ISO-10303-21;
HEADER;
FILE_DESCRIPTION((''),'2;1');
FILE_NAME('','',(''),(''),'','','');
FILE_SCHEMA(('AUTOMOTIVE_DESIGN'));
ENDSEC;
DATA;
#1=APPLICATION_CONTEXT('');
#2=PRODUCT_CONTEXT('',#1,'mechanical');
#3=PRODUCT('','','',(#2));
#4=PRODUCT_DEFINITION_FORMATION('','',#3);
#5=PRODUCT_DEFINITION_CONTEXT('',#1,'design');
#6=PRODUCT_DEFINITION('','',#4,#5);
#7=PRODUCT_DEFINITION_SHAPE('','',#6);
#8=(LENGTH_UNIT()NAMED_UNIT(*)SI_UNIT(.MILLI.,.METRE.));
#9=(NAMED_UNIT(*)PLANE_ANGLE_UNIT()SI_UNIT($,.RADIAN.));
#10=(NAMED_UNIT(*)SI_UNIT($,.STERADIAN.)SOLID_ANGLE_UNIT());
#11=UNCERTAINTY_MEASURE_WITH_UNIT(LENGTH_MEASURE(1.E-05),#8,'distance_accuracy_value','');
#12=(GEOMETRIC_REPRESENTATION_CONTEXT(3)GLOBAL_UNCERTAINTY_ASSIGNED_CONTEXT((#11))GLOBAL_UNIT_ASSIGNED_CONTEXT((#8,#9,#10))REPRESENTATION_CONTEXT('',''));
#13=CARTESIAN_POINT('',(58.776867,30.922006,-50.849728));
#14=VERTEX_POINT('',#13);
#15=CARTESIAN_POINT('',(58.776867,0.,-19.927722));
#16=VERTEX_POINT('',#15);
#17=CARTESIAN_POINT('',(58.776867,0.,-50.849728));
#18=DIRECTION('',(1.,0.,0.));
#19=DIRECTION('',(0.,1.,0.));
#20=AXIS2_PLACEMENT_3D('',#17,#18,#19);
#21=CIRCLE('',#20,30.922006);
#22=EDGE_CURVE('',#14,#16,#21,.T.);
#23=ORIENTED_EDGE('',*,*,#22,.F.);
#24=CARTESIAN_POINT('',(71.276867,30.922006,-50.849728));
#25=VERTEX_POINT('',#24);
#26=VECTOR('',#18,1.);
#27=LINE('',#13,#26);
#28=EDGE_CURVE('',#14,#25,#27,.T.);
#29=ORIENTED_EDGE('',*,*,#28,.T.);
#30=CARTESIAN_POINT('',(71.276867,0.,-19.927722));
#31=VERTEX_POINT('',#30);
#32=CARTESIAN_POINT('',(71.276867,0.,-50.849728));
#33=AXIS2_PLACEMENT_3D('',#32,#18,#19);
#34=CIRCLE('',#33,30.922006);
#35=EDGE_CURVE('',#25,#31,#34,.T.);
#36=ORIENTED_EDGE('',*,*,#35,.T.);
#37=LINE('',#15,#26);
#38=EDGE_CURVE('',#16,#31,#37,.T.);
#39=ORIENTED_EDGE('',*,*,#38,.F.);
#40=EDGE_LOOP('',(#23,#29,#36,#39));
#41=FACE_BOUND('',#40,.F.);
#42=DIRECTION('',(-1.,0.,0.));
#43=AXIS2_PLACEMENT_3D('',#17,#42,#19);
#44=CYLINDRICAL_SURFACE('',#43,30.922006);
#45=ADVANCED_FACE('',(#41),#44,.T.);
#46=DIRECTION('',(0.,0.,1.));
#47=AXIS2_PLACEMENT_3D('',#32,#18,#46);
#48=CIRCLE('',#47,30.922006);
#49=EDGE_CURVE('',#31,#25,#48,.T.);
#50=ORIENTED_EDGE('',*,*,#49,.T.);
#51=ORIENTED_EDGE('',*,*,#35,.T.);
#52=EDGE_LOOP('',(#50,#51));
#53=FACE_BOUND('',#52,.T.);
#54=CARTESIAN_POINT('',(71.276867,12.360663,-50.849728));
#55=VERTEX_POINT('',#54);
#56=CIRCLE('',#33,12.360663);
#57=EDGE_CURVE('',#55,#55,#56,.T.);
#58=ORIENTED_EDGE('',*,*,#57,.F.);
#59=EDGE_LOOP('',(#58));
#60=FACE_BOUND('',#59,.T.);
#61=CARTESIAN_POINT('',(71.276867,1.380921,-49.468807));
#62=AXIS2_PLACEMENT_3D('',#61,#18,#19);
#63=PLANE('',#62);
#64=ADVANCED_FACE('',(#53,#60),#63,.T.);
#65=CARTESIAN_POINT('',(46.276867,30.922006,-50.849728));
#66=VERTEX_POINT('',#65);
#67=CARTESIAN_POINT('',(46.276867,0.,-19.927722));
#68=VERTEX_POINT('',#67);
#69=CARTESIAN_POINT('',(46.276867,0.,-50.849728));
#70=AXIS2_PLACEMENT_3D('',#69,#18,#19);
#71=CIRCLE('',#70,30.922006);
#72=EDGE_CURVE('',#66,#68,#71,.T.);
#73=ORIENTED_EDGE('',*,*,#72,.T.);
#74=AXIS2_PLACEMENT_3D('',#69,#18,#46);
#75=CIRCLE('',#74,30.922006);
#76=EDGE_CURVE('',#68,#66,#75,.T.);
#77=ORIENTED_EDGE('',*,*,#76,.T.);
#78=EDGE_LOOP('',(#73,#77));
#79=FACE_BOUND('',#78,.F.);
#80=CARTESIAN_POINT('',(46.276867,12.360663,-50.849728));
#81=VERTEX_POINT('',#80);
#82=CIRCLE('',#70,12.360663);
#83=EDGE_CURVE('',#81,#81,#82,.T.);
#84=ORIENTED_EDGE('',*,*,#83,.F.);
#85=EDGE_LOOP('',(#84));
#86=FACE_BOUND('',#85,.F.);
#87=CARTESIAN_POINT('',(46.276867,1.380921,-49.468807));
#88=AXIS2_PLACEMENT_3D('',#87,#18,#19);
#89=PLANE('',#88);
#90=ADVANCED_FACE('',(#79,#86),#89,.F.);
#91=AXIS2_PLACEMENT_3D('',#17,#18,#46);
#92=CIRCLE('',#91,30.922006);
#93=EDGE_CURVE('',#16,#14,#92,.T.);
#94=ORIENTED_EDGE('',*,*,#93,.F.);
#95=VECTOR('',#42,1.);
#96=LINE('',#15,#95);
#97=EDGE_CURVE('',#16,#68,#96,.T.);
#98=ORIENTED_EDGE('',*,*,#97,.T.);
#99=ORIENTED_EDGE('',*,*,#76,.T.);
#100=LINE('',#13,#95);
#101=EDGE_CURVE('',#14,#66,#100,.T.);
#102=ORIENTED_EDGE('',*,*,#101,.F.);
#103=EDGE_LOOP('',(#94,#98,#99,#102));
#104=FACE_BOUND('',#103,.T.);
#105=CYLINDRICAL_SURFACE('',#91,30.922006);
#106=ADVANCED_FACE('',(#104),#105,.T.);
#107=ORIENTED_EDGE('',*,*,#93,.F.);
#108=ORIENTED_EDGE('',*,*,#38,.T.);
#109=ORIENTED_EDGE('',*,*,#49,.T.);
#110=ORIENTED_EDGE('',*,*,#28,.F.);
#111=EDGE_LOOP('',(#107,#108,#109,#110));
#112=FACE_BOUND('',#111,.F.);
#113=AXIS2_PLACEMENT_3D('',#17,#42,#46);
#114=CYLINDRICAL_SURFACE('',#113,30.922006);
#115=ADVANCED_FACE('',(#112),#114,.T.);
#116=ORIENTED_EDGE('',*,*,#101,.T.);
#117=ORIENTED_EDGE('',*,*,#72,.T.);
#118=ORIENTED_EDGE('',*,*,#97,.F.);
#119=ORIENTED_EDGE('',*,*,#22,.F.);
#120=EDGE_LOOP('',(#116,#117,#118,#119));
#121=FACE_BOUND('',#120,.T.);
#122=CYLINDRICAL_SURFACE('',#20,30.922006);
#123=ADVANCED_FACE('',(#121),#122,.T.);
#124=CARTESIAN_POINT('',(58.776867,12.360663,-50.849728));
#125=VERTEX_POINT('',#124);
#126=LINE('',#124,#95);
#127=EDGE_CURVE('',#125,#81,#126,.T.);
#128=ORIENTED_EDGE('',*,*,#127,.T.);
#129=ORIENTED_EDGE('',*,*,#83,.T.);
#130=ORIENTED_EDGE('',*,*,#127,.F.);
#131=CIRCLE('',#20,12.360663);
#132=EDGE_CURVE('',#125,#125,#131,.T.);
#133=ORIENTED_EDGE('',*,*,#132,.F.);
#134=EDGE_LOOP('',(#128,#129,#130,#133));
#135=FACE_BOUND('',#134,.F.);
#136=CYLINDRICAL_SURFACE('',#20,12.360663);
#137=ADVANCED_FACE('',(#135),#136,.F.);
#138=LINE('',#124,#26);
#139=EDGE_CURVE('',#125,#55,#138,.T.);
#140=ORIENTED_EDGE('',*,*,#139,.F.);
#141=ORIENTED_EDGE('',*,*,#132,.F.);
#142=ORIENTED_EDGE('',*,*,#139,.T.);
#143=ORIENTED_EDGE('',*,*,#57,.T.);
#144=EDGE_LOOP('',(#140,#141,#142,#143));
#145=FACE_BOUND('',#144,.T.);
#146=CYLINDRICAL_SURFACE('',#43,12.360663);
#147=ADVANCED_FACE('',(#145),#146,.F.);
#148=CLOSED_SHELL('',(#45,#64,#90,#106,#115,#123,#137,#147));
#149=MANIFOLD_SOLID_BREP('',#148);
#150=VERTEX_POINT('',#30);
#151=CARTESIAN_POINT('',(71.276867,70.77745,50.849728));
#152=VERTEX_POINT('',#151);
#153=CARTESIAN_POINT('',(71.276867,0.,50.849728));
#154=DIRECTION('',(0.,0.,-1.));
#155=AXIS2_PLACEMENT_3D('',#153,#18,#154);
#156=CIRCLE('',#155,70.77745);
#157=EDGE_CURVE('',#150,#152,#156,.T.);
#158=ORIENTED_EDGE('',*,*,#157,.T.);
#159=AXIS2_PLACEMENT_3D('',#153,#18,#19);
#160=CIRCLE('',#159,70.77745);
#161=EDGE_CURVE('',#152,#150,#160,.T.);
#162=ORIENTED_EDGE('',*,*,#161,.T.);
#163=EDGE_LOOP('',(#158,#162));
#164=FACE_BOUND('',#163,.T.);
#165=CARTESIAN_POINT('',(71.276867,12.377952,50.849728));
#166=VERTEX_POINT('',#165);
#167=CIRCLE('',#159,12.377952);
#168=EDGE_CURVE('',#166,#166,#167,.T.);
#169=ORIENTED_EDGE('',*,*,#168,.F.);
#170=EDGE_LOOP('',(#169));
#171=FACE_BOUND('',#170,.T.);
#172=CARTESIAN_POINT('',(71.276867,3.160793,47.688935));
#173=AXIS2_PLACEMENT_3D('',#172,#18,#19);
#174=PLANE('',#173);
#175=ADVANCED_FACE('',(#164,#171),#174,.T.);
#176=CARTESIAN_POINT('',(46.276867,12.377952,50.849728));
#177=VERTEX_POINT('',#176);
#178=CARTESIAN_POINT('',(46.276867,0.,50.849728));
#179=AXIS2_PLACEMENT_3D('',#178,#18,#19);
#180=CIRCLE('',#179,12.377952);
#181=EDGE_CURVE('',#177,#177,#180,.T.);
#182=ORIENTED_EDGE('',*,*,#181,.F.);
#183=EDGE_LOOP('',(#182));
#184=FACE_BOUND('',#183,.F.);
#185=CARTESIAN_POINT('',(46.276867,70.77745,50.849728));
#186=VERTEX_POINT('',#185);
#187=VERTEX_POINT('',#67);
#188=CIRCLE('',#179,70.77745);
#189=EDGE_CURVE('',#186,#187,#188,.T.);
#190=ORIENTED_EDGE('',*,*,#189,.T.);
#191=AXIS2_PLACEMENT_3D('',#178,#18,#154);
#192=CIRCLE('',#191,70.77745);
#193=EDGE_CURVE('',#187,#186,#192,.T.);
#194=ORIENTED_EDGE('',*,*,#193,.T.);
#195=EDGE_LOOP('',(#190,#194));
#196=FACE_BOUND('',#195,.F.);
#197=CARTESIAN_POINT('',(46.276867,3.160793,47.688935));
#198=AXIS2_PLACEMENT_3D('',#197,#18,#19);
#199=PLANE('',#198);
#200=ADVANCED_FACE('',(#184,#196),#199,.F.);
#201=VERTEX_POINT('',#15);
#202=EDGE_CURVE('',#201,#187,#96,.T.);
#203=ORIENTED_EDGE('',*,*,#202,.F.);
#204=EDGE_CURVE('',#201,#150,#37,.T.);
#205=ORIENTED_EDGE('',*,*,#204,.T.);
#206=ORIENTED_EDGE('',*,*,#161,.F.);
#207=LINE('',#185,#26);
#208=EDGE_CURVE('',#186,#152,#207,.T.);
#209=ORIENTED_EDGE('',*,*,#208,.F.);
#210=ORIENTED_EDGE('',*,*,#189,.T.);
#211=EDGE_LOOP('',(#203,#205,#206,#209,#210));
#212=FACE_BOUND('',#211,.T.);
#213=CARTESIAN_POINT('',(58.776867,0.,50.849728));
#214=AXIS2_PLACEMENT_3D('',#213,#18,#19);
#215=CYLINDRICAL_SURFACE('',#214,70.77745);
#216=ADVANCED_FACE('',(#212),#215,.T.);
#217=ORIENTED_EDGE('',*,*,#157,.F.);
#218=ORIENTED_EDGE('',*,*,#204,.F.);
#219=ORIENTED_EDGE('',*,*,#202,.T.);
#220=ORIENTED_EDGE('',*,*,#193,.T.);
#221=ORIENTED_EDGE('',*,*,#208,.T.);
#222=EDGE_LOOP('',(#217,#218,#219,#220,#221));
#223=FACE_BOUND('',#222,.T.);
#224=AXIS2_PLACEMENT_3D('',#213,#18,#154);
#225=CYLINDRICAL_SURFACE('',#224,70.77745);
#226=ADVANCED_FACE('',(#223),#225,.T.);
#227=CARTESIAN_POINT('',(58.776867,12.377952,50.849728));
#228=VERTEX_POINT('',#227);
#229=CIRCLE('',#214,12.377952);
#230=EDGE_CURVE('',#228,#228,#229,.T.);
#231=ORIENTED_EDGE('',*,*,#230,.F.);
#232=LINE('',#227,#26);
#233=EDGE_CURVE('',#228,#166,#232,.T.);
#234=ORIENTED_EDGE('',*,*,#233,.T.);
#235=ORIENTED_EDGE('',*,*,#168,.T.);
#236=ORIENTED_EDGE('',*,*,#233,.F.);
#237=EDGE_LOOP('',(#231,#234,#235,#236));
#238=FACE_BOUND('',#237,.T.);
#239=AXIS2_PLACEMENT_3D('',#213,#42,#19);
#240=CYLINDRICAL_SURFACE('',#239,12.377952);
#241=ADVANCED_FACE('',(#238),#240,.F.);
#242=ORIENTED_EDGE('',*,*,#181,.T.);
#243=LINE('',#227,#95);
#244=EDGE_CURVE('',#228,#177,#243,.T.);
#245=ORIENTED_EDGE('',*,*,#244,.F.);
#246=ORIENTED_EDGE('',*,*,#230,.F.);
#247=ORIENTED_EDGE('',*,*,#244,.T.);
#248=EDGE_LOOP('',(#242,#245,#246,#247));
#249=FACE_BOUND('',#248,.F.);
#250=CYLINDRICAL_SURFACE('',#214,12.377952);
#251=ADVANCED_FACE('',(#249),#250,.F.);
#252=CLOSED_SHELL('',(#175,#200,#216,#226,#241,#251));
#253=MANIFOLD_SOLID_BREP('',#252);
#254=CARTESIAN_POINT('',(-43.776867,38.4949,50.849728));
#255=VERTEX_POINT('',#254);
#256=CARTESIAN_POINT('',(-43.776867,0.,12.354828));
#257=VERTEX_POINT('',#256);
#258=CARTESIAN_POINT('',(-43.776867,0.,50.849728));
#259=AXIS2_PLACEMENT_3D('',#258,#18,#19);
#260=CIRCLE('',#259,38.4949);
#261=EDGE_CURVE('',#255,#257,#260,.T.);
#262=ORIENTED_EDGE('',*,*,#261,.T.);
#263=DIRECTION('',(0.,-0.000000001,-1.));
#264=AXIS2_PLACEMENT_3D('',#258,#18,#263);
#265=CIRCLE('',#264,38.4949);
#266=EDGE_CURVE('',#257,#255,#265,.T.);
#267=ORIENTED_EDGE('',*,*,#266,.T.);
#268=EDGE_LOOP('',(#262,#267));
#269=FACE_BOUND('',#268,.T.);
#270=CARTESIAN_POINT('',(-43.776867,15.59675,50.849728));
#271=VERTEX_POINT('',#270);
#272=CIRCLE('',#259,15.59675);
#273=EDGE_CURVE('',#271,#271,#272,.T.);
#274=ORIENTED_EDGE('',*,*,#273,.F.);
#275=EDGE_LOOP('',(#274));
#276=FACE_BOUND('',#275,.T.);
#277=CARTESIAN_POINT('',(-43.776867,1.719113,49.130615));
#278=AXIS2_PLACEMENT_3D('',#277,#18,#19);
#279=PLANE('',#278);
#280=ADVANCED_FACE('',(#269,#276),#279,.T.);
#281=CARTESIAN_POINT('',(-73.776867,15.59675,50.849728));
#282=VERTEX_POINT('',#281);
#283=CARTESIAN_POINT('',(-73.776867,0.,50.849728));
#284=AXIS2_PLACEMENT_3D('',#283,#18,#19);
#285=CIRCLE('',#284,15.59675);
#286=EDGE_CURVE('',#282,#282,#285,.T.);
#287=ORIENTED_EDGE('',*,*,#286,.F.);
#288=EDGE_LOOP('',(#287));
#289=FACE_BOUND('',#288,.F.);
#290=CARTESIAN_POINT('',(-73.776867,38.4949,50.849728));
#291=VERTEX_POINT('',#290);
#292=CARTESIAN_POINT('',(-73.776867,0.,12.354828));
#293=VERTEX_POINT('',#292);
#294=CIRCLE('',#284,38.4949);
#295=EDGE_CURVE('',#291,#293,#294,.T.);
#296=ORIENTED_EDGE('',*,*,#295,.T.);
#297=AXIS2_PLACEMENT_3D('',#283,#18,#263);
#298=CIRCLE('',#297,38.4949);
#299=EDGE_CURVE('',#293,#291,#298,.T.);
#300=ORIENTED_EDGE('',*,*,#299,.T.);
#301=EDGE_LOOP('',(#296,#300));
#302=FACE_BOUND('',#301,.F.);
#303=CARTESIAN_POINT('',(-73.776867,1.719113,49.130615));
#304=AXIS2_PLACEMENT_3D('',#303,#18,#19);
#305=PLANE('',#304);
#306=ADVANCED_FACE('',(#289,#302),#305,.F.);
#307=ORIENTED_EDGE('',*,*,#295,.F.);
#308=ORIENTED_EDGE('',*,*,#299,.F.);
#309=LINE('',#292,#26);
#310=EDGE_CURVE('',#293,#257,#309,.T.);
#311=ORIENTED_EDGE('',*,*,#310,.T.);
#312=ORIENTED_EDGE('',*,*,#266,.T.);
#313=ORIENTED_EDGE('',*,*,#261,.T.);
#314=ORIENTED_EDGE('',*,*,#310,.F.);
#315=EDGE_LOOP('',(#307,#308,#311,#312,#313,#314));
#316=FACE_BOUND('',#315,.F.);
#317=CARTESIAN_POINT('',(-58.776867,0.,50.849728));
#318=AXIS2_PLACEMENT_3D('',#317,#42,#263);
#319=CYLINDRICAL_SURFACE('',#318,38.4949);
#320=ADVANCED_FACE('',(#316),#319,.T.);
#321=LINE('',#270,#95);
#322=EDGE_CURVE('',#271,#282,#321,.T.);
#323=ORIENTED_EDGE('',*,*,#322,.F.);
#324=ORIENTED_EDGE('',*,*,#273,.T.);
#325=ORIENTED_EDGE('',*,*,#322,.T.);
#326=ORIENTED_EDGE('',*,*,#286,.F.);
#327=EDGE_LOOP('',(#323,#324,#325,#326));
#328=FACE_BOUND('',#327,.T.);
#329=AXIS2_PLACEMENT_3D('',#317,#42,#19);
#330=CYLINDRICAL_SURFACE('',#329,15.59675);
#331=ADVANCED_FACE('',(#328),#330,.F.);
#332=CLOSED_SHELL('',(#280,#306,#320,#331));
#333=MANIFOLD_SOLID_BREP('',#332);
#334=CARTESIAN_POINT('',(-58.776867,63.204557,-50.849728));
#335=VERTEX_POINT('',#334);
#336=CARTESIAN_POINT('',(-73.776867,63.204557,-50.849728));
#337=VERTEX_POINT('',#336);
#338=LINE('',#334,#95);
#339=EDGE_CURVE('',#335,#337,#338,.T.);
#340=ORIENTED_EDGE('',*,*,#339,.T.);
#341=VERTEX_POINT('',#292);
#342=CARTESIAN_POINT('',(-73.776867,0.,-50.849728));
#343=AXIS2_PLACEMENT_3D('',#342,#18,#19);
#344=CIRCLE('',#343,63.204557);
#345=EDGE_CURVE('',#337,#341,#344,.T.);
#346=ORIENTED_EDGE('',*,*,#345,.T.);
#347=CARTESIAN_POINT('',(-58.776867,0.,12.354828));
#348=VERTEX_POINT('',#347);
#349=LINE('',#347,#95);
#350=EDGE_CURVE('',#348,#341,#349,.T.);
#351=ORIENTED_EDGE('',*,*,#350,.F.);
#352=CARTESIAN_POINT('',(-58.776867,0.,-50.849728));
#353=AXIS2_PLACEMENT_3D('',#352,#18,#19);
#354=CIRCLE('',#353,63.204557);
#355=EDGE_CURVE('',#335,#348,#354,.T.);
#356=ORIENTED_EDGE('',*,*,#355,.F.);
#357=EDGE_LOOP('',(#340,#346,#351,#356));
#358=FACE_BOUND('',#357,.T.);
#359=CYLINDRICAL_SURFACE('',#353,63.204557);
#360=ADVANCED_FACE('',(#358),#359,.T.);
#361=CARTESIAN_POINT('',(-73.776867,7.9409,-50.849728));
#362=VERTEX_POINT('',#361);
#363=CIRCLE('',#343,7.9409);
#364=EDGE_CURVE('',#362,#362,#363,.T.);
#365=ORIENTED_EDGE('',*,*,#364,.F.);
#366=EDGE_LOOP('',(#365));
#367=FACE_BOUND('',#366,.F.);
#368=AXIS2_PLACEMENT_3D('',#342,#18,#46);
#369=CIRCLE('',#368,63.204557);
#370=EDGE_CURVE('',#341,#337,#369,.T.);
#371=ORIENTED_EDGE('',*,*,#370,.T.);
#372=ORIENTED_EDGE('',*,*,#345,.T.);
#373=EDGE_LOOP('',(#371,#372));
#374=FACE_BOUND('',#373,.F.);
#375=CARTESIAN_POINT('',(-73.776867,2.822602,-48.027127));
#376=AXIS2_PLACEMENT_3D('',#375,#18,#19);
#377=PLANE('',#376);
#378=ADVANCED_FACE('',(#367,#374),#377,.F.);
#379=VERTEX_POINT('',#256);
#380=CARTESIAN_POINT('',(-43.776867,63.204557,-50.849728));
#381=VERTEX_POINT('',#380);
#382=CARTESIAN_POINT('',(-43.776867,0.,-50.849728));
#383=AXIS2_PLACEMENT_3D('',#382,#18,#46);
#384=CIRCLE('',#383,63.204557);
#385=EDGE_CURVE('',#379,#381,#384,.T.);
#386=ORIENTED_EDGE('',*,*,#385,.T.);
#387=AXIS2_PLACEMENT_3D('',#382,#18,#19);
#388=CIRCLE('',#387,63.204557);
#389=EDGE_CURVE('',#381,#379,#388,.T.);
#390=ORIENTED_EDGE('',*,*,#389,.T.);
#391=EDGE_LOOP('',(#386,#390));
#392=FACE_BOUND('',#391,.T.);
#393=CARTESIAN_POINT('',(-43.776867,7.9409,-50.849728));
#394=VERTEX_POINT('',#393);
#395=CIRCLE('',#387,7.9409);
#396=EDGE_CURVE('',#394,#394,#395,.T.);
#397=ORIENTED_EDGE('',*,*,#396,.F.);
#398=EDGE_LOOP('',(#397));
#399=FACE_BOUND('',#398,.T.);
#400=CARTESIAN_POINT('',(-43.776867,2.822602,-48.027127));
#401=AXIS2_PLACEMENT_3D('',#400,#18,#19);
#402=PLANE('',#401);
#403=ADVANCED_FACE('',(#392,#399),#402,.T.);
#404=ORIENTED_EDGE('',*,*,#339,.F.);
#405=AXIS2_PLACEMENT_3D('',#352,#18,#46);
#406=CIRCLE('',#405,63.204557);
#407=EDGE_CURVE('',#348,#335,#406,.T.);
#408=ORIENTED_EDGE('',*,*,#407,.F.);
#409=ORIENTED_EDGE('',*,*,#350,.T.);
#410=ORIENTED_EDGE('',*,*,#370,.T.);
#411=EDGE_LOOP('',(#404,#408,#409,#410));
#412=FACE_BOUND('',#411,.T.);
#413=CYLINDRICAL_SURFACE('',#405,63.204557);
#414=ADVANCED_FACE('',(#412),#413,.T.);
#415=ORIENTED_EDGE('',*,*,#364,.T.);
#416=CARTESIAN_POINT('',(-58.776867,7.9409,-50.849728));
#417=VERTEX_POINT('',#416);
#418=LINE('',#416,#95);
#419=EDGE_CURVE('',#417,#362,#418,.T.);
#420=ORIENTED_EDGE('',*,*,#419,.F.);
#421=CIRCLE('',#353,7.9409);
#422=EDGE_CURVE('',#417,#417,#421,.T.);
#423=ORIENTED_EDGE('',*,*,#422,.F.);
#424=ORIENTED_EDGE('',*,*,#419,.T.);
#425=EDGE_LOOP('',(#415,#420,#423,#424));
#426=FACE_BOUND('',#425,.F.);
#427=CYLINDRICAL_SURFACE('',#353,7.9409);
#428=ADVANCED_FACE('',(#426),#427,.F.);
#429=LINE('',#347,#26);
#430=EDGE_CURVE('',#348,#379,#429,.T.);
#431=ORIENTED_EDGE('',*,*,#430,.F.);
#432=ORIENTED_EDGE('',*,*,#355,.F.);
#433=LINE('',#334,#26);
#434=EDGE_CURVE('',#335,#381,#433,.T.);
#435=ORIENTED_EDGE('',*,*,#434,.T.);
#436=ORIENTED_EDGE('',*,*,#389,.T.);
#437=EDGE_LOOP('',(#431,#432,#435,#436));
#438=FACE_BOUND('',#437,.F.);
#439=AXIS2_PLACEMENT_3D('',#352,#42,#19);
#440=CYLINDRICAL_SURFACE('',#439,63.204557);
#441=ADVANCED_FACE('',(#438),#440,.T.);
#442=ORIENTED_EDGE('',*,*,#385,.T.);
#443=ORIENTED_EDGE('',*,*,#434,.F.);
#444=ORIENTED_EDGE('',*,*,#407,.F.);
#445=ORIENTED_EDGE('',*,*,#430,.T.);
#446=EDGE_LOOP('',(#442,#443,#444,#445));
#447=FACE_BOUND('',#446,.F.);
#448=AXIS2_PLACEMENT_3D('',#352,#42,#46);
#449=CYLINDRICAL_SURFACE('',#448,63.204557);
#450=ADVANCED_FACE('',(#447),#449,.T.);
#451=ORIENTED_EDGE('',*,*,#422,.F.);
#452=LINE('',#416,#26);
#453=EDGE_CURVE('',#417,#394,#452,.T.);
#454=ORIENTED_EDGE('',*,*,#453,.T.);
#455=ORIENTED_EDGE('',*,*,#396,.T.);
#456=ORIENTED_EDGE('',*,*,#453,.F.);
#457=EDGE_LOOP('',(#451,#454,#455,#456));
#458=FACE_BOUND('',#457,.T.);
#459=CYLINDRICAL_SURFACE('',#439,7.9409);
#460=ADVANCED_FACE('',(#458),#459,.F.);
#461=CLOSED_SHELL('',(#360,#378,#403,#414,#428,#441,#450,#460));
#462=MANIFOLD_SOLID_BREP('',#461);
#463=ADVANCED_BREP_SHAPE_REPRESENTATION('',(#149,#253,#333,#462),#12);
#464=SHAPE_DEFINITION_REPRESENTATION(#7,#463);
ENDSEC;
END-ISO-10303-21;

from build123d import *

# Parameters (mm, degrees)
F2_R          = 7.9409001723
F5_DEPTH      = 15
F2_R_2        = 15.5967497012
F6_DEPTH      = 15
F6_DEPTH_BACK = 15
F4_R          = 12.3606629879
F7_DEPTH      = 12.5
F4_R_2        = 12.3779516433
F8_DEPTH      = 12.5


with BuildPart() as f5:
    # F2 (on plane+point) → F5 (new body, symmetric)
    with BuildSketch(Plane.YZ.offset(-58.7768666446)):
        with BuildLine():
            ThreePointArc((63.2045566431, -50.8497282863), (44.6923705955, -6.1573576734), (-2.45e-08, 12.3548283568))
            ThreePointArc((-2.45e-08, 12.3548283568), (-44.6923705955, -95.5420988992), (63.2045566431, -50.8497282863))
        make_face()
        with Locations((0, -50.8497282863)):
            Circle(F2_R, mode=Mode.SUBTRACT)
    extrude(amount=F5_DEPTH, both=True)


with BuildPart() as f6:
    # F2 (on plane+point) → F6 (new body, two sides)
    with BuildSketch(Plane.YZ.offset(-58.7768666446)) as f6_sk:
        with BuildLine():
            ThreePointArc((-2.45e-08, 12.3548283568), (27.2200047725, 23.6297234964), (38.4948999294, 50.8497282863))
            ThreePointArc((38.4948999294, 50.8497282863), (-27.2200047725, 78.0697330761), (-2.45e-08, 12.3548283568))
        make_face()
        with Locations((0, 50.8497282863)):
            Circle(F2_R_2, mode=Mode.SUBTRACT)
    extrude(amount=-F6_DEPTH)
    extrude(f6_sk.sketch, amount=F6_DEPTH_BACK)


with BuildPart() as f7:
    # F4 (on plane+point) → F7 (new body, symmetric)
    with BuildSketch(Plane.YZ.offset(58.7768666446)):
        with BuildLine():
            ThreePointArc((30.9220062538, -50.8497282863), (21.8651603136, -28.98456798), (1.04e-08, -19.9277220325))
            ThreePointArc((1.04e-08, -19.9277220325), (-21.8651603136, -72.7148885925), (30.9220062538, -50.8497282863))
        make_face()
        with Locations((0, -50.8497282863)):
            Circle(F4_R, mode=Mode.SUBTRACT)
    extrude(amount=F7_DEPTH, both=True)

    # F4 (on plane+point) → F8 (join, symmetric)
    with BuildSketch(Plane.YZ.offset(58.7768666446)):
        with BuildLine():
            ThreePointArc((1.04e-08, -19.9277220325), (50.0472150791, 0.8025132145), (70.7774503187, 50.8497282863))
            ThreePointArc((70.7774503187, 50.8497282863), (-50.0472150791, 100.896943358), (1.04e-08, -19.9277220325))
        make_face()
        with Locations((0, 50.8497282863)):
            Circle(F4_R_2, mode=Mode.SUBTRACT)
    extrude(amount=F8_DEPTH, both=True)


solid = Compound([f5.part, f6.part, f7.part])
